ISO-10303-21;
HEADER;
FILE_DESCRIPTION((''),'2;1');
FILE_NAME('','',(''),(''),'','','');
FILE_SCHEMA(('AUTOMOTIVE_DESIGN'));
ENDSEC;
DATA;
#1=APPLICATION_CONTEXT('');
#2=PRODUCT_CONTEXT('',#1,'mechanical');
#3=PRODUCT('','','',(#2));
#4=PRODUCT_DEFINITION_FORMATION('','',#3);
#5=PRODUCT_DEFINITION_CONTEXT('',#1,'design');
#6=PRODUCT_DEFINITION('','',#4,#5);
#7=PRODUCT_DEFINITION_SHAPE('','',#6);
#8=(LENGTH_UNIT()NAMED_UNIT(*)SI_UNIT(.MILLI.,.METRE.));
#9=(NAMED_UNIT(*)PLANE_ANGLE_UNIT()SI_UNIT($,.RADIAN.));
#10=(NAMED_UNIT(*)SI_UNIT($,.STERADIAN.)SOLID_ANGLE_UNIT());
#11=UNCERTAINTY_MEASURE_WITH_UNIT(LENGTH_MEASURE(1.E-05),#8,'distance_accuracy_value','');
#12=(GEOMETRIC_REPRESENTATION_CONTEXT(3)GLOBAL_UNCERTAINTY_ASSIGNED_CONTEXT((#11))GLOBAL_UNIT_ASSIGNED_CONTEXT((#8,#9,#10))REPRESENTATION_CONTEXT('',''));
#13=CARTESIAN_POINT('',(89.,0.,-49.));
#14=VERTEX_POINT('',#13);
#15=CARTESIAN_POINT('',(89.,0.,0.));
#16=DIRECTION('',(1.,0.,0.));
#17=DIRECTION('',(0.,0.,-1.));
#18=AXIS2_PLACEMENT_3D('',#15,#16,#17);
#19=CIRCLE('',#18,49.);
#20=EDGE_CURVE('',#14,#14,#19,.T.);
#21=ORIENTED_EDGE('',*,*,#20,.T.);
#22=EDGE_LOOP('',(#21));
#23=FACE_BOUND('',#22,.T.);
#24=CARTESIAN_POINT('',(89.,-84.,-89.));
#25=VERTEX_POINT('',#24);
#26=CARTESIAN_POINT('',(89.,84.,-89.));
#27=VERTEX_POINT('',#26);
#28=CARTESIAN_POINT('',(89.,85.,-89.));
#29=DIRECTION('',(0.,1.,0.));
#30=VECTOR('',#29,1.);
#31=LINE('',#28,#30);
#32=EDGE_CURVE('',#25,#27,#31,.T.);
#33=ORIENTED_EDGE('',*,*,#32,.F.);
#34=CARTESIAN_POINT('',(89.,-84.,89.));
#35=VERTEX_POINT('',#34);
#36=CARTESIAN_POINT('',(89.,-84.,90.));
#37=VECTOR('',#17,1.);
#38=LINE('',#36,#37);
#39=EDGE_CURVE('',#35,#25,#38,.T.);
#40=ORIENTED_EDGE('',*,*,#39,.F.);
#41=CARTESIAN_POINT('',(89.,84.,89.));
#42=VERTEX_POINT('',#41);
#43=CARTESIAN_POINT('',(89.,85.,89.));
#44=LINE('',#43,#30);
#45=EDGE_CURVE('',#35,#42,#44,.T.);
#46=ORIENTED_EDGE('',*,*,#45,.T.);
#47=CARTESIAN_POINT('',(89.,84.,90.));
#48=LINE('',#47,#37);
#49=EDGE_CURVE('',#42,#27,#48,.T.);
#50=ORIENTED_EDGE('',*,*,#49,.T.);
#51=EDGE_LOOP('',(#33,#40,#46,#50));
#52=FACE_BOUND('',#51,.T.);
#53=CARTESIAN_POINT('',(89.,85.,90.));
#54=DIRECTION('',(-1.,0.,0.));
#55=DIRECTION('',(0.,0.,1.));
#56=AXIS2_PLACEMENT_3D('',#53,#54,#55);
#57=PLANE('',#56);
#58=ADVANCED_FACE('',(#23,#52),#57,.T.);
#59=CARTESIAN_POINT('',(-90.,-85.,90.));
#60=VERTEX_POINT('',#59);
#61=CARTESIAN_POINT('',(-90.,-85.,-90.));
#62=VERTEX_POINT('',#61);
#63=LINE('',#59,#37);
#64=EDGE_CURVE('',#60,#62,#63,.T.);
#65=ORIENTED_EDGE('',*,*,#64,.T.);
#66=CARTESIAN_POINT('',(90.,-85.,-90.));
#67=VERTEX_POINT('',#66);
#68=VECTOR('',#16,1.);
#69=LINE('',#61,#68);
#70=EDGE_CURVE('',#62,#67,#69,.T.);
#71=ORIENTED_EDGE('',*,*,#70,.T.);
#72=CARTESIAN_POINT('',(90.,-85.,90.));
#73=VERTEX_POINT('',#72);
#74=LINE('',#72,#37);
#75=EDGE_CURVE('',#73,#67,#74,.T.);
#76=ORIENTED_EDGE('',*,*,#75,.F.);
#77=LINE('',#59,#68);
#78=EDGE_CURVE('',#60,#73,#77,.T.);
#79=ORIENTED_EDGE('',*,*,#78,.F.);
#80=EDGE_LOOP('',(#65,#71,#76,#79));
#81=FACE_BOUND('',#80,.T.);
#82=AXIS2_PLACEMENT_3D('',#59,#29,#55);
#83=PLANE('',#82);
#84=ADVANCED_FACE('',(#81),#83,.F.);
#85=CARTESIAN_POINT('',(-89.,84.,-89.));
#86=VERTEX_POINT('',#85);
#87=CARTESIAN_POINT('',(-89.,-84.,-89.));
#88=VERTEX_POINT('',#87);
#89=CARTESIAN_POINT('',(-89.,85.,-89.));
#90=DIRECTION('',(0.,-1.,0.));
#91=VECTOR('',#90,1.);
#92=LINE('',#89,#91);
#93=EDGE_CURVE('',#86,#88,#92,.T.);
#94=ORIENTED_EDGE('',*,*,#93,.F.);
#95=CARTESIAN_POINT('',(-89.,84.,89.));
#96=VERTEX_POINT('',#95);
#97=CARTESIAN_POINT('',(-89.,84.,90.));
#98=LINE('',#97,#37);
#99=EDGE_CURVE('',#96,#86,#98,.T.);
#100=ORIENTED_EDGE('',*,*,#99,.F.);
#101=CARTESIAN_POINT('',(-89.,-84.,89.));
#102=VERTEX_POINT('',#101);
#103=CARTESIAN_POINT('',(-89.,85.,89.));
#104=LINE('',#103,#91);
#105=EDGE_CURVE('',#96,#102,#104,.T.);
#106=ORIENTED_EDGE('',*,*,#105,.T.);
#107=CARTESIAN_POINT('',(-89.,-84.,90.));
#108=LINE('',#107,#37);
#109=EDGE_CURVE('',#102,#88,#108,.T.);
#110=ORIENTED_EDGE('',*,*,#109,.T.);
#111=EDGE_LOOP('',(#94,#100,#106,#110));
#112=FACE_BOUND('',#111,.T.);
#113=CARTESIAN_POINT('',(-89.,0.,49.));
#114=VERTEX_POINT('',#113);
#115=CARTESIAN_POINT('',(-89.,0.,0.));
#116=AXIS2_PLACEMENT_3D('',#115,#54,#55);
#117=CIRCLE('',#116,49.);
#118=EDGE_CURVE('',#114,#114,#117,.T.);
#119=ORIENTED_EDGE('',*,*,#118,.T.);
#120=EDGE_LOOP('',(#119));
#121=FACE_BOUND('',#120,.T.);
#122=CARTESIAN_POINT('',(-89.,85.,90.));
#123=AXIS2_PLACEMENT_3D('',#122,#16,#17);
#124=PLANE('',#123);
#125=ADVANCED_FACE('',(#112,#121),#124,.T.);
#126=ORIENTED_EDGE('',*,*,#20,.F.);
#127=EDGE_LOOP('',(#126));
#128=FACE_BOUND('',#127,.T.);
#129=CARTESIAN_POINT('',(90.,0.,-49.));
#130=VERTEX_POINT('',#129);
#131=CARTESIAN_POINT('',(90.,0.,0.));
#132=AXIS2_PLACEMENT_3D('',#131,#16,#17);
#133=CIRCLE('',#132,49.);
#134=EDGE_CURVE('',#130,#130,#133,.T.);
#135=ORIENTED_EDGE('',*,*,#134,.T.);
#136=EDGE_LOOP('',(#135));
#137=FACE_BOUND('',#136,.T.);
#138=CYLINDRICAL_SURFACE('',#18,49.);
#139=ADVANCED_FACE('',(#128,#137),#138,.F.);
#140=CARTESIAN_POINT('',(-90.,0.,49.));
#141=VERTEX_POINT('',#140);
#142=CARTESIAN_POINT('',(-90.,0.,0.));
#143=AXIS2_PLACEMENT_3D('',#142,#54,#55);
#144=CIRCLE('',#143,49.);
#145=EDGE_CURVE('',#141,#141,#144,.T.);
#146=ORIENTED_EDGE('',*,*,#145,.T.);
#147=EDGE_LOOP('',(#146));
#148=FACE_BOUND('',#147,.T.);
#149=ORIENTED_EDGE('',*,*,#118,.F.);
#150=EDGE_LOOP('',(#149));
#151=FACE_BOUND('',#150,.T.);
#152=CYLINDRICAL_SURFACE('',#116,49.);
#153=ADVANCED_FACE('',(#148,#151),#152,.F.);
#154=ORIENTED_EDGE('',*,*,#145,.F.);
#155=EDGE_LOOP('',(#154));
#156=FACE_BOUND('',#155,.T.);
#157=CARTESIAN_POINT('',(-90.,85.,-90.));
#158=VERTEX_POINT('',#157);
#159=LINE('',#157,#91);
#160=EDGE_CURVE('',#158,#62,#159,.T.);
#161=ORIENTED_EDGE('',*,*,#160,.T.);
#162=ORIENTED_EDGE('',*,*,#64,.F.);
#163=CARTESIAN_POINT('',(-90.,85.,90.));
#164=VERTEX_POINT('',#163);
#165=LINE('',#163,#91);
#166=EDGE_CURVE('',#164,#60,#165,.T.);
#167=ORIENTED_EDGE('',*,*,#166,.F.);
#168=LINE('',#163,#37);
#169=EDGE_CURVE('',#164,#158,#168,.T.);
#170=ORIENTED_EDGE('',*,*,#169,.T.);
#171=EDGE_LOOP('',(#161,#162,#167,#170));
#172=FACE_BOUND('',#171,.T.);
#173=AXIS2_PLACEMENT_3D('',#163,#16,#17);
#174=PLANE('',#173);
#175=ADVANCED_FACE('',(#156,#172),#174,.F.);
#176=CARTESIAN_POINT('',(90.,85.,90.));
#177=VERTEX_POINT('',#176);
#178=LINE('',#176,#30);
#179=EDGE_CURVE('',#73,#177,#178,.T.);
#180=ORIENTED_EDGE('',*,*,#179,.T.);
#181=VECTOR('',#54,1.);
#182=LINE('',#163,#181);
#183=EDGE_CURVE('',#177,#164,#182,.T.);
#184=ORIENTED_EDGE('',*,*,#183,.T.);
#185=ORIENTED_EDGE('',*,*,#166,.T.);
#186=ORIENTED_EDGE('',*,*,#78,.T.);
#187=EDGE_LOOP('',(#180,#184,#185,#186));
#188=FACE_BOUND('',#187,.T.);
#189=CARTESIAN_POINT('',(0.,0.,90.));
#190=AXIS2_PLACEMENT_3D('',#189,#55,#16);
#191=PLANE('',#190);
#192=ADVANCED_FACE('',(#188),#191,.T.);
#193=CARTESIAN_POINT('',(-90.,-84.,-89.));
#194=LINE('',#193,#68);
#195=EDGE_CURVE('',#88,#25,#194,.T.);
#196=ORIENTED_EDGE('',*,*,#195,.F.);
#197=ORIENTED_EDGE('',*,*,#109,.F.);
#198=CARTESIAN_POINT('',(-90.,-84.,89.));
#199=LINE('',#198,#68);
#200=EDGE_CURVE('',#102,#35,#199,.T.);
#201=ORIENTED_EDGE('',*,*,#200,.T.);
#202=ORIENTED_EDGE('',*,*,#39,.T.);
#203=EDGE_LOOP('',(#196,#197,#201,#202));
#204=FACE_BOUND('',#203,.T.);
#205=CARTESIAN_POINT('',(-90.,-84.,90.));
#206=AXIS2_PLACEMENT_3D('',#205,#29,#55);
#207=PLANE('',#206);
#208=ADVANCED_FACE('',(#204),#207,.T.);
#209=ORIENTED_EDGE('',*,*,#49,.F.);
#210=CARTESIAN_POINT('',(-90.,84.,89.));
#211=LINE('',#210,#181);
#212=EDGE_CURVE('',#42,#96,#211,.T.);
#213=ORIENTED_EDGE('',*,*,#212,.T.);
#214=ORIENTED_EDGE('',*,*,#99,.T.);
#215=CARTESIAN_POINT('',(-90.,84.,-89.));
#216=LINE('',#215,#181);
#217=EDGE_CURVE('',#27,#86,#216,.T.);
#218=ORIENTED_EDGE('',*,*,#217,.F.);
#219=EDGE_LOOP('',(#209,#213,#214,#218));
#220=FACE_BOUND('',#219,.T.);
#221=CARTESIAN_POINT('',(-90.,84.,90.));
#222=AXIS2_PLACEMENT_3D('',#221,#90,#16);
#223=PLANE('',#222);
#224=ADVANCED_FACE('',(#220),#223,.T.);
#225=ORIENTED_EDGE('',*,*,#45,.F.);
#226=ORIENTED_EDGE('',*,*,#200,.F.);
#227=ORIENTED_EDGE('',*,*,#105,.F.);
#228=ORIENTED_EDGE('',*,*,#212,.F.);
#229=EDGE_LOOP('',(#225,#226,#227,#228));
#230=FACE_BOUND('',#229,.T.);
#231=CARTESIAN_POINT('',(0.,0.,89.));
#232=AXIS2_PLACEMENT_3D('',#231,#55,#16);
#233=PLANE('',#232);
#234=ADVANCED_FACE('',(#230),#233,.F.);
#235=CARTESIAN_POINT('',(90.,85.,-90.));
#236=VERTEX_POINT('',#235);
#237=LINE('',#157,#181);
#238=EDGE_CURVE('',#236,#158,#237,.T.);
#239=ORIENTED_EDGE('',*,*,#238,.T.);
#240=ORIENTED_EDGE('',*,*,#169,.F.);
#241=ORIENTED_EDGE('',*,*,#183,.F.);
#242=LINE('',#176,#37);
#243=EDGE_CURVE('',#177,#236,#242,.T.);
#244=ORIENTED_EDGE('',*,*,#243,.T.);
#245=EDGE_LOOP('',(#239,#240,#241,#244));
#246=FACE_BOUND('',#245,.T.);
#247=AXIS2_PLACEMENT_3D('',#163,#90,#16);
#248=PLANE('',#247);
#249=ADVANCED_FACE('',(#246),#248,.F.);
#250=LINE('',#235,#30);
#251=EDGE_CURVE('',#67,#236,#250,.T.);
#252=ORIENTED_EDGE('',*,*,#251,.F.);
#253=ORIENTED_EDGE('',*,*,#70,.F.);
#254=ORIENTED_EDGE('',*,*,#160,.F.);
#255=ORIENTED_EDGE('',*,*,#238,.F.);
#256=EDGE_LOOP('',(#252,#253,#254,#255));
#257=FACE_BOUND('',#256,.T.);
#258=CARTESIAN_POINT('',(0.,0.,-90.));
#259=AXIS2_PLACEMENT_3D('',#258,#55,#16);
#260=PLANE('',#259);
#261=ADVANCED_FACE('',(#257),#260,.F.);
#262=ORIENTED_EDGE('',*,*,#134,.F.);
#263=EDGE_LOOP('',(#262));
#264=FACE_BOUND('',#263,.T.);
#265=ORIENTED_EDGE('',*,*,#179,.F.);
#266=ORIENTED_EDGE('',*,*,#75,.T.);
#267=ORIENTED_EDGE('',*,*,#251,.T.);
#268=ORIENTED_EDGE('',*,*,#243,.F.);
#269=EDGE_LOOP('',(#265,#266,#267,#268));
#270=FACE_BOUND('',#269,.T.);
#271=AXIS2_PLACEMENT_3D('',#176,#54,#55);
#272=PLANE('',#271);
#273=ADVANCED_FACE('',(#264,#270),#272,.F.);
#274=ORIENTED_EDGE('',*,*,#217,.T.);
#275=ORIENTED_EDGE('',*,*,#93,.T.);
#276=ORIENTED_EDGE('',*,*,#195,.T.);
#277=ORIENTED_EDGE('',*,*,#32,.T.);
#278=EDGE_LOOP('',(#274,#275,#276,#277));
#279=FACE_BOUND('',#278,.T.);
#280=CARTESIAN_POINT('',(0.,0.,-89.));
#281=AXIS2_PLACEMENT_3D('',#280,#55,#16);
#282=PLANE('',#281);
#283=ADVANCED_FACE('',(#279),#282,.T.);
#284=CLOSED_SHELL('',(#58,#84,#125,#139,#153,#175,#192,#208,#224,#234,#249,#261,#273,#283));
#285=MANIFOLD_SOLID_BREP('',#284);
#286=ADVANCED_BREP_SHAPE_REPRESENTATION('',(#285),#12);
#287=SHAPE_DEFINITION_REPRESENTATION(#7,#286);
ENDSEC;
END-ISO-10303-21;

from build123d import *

# Parameters (mm, degrees)
CROQUIS1_W              = 180
CROQUIS1_H              = 170
SALIENTE_EXTRUIR1_DEPTH = 90
CROQUIS2_R              = 49
CORTAR_EXTRUIR1_DEPTH   = 1
CORTAR_EXTRUIR2_START   = -1
CROQUIS3_R              = 49
CORTAR_EXTRUIR2_DEPTH   = 1
VACIADO1_START          = -89
VACIADO1_OUTLINE_W      = 168
VACIADO1_OUTLINE_H      = 178
VACIADO1_DEPTH          = 178


# Read off the part's stored shape, not the designer's step: Vaciado1
with BuildPart() as part:
    # Croquis1 → Saliente-Extruir1 (new, symmetric)
    with BuildSketch(Plane.XY):
        Rectangle(CROQUIS1_W, CROQUIS1_H)
    extrude(amount=SALIENTE_EXTRUIR1_DEPTH, both=True)

    # Croquis2 → Cortar-Extruir1 (cut)
    with BuildSketch(Plane.ZY.offset(90)):
        Circle(CROQUIS2_R)
    extrude(amount=-CORTAR_EXTRUIR1_DEPTH, mode=Mode.SUBTRACT)

    # Croquis3 → Cortar-Extruir2 (cut)
    with BuildSketch(Plane(origin=(90, 0, 0), x_dir=(0, 0, -1), z_dir=(1, 0, 0)).offset(CORTAR_EXTRUIR2_START)):
        with Locations(Location((0, 0, 0), (0, 0, 180))):
            Circle(CROQUIS3_R)
    extrude(amount=CORTAR_EXTRUIR2_DEPTH, mode=Mode.SUBTRACT)

    # Vaciado1 outline → Vaciado1 (cut)
    with BuildSketch(Plane.YZ.offset(VACIADO1_START)):
        Rectangle(VACIADO1_OUTLINE_W, VACIADO1_OUTLINE_H)
    extrude(amount=VACIADO1_DEPTH, mode=Mode.SUBTRACT)


solid = part.part
